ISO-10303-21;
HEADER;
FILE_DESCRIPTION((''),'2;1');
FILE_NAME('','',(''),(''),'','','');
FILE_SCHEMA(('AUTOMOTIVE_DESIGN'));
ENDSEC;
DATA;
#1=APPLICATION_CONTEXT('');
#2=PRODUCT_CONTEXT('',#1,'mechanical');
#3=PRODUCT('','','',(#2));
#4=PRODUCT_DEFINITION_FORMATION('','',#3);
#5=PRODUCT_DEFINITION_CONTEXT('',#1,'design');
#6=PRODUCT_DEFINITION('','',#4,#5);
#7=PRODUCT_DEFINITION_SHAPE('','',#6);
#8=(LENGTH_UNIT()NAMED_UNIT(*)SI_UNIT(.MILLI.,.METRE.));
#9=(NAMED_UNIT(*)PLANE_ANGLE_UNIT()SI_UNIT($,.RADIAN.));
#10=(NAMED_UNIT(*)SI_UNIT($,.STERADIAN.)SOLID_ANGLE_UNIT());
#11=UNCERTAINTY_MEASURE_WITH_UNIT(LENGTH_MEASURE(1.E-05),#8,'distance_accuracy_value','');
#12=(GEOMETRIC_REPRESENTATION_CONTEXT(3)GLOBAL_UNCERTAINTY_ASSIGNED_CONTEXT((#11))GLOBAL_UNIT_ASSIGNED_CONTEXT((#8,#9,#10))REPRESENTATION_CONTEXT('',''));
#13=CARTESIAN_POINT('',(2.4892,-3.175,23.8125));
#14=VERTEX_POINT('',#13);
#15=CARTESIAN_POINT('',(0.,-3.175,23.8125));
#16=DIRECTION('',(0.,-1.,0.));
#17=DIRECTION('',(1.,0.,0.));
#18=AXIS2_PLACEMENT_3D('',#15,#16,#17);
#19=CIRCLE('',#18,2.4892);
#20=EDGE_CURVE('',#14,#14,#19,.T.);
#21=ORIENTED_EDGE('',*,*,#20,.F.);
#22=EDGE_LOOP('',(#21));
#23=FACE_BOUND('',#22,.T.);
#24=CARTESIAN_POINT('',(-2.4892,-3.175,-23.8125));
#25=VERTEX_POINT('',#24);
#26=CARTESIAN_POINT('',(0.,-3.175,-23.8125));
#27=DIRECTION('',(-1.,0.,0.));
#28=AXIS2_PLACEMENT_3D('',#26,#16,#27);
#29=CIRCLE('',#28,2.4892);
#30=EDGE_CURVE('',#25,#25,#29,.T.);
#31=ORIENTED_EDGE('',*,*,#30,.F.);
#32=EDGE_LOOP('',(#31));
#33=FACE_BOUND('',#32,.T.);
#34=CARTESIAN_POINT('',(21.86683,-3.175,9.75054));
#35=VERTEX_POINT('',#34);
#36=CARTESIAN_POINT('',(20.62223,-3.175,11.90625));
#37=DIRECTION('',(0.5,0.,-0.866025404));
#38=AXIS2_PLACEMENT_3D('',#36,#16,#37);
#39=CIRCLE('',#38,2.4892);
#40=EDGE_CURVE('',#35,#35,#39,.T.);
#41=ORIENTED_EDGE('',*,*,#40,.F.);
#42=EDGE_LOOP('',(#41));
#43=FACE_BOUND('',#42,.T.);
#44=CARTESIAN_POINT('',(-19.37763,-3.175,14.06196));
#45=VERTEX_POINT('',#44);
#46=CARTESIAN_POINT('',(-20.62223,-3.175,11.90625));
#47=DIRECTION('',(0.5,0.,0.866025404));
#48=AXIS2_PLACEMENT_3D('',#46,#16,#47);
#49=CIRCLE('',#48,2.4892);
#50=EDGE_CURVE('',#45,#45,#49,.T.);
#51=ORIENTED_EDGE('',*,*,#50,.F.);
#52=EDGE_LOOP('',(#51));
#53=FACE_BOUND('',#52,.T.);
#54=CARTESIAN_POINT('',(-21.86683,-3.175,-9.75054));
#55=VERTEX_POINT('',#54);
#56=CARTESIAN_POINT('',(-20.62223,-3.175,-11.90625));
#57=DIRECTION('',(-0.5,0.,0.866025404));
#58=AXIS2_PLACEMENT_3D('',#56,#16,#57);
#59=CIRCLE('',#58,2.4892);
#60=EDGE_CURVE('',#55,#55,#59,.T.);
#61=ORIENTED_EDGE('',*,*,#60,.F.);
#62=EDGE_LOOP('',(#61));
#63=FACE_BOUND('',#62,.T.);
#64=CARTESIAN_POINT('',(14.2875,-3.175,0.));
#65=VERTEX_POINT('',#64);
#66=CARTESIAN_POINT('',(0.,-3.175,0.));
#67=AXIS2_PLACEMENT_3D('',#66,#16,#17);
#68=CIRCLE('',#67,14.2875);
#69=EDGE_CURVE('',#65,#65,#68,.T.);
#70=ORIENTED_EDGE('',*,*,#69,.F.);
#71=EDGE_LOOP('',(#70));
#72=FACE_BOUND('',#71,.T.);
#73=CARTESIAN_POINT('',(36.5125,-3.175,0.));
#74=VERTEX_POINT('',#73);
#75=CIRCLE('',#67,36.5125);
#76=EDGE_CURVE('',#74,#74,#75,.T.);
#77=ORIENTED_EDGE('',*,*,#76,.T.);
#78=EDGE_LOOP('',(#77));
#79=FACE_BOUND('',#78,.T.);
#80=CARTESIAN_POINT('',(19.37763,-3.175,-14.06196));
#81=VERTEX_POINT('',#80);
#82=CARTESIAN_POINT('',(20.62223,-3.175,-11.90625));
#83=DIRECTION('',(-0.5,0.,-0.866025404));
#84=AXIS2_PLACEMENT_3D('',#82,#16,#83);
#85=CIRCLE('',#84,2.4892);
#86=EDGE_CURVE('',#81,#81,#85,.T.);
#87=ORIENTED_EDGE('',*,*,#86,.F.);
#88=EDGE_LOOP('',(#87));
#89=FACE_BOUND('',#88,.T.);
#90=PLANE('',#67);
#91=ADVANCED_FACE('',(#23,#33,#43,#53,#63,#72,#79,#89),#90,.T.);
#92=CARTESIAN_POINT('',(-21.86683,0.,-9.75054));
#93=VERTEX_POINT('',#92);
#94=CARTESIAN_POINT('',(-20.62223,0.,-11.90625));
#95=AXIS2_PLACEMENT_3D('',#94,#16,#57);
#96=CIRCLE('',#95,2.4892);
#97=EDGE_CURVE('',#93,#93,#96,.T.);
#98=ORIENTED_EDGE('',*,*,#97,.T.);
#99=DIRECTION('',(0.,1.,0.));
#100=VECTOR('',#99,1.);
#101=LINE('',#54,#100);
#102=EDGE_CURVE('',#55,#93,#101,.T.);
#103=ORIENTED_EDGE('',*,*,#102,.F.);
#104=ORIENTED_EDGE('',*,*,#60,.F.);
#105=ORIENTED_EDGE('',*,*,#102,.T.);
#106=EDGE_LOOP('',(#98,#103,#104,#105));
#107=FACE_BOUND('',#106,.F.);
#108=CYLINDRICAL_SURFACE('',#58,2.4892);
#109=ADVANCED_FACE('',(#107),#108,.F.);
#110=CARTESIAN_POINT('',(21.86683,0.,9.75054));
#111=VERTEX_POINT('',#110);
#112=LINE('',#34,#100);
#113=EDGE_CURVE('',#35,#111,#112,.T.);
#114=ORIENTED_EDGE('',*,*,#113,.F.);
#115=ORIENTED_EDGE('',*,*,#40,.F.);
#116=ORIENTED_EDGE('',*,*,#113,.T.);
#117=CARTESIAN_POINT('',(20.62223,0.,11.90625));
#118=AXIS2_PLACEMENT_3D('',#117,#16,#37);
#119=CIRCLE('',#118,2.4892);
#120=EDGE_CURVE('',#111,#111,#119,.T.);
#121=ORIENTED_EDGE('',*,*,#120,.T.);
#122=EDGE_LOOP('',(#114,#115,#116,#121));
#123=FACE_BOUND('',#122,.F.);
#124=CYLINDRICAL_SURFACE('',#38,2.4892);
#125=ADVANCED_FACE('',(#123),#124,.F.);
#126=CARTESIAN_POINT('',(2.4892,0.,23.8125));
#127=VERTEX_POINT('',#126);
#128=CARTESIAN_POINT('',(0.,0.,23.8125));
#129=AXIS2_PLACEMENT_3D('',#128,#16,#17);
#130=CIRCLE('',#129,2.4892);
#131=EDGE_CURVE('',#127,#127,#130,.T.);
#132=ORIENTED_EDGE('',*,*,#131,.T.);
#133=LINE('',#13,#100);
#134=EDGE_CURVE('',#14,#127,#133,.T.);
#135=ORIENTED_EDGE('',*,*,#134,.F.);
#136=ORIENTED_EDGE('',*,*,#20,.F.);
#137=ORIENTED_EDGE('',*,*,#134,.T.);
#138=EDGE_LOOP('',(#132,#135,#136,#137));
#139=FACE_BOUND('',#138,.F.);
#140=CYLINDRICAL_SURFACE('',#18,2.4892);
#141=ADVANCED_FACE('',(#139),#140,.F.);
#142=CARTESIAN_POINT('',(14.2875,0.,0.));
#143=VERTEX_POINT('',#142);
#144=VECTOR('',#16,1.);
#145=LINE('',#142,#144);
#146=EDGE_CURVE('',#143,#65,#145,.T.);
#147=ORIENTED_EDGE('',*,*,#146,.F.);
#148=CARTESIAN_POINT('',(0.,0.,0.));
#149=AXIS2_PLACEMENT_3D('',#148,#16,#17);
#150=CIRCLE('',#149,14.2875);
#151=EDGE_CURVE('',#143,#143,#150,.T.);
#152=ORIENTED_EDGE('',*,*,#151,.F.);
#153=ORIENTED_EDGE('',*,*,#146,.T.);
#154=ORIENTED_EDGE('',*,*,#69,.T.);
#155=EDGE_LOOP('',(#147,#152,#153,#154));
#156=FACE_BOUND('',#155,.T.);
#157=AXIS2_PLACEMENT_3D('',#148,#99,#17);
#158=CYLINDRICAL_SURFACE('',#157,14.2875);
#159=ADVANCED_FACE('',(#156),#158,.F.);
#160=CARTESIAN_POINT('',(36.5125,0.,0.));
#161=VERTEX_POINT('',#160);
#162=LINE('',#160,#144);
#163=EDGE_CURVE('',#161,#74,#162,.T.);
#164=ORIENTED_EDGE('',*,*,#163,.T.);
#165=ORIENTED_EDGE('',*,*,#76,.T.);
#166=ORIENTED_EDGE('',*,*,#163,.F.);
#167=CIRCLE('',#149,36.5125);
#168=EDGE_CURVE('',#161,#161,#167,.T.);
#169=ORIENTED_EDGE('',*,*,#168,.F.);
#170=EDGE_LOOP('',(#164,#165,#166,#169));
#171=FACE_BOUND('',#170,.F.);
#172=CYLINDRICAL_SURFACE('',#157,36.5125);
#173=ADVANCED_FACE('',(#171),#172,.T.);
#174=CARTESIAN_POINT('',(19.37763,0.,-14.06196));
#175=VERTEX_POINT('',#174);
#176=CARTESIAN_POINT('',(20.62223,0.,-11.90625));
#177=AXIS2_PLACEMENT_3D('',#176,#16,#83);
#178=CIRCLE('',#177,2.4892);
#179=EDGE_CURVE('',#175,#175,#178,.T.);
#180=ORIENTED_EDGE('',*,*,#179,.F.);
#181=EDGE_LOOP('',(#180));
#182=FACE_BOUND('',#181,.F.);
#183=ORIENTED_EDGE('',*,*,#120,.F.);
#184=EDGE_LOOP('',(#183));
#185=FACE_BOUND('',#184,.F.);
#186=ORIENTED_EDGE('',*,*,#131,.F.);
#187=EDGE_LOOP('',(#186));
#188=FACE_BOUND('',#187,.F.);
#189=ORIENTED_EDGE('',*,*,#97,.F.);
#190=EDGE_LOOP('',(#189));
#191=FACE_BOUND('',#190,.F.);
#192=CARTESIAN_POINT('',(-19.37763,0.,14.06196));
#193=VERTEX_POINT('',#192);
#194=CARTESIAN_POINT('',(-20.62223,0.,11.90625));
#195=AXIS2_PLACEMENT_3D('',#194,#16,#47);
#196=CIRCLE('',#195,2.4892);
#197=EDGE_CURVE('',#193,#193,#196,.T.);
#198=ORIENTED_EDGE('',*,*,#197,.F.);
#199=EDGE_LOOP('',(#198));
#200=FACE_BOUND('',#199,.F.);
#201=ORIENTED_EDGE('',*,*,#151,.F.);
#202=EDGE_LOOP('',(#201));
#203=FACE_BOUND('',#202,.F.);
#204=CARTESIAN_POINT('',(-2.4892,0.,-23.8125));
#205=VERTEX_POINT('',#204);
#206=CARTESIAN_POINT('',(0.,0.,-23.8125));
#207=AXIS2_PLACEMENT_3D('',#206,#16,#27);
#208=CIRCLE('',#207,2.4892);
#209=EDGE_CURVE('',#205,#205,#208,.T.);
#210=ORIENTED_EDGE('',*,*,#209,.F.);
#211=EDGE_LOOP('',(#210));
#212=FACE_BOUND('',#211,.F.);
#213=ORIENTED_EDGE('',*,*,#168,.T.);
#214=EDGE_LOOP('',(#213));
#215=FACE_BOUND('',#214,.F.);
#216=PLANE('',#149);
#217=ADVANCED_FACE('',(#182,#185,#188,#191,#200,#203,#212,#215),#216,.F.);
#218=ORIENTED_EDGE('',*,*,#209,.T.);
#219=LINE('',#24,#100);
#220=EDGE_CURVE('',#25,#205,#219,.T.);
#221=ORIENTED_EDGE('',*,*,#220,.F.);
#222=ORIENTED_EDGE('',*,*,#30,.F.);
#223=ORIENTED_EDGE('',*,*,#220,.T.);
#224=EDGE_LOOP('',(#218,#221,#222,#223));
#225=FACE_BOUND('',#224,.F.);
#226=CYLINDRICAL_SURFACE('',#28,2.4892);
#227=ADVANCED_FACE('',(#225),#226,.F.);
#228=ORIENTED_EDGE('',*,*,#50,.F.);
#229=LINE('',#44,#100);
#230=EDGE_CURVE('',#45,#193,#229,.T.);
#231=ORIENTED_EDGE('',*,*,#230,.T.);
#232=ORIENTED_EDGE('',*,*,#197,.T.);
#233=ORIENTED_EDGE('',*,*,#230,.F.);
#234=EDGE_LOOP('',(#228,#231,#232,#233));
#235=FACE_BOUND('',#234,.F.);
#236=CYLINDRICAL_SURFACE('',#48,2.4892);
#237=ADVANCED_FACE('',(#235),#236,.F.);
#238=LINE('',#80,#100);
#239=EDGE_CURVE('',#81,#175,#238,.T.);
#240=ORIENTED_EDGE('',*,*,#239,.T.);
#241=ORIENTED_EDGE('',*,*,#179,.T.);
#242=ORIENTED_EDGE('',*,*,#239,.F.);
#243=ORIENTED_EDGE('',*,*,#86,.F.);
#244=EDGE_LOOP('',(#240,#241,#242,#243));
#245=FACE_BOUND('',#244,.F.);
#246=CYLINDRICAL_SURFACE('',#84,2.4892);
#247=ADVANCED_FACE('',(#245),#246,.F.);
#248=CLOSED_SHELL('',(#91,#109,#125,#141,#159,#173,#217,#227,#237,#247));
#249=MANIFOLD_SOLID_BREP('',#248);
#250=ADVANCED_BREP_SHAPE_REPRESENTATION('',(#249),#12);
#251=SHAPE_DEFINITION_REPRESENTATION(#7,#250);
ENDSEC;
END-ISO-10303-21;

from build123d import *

# Parameters (mm, degrees)
F0_R            = 36.5125
F0_R_2          = 14.2875
F1_DEPTH        = 3.175
F2_R            = 2.4892
F3_DEPTH        = 3.176
F3_COPIES_COUNT = 6


# Not quite as in the source:
# - a pattern or mirror of a feature is missing from the dataset's text; its kind, count and spacing are read off the source's solid


with BuildPart() as f1:
    # F0 (on Front) → F1 (new body)
    with BuildSketch(Plane.XZ):
        Circle(F0_R)
        Circle(F0_R_2, mode=Mode.SUBTRACT)
    extrude(amount=F1_DEPTH)

    # F2 (on face) → F3 (cut, through all)
    with BuildSketch(Plane.XZ.offset(3.175)):
        with Locations((0, 23.8125)):
            Circle(F2_R)
    f3 = extrude(amount=-F3_DEPTH, mode=Mode.SUBTRACT)

    # F3_copies: F3 ×6 about axis
    f3_copies_axis = Axis((0, 0, 0), (0, 1, 0))
    for i in range(1, F3_COPIES_COUNT):
        add(f3.rotate(f3_copies_axis, i * 360 / F3_COPIES_COUNT), mode=Mode.SUBTRACT)


solid = f1.part
